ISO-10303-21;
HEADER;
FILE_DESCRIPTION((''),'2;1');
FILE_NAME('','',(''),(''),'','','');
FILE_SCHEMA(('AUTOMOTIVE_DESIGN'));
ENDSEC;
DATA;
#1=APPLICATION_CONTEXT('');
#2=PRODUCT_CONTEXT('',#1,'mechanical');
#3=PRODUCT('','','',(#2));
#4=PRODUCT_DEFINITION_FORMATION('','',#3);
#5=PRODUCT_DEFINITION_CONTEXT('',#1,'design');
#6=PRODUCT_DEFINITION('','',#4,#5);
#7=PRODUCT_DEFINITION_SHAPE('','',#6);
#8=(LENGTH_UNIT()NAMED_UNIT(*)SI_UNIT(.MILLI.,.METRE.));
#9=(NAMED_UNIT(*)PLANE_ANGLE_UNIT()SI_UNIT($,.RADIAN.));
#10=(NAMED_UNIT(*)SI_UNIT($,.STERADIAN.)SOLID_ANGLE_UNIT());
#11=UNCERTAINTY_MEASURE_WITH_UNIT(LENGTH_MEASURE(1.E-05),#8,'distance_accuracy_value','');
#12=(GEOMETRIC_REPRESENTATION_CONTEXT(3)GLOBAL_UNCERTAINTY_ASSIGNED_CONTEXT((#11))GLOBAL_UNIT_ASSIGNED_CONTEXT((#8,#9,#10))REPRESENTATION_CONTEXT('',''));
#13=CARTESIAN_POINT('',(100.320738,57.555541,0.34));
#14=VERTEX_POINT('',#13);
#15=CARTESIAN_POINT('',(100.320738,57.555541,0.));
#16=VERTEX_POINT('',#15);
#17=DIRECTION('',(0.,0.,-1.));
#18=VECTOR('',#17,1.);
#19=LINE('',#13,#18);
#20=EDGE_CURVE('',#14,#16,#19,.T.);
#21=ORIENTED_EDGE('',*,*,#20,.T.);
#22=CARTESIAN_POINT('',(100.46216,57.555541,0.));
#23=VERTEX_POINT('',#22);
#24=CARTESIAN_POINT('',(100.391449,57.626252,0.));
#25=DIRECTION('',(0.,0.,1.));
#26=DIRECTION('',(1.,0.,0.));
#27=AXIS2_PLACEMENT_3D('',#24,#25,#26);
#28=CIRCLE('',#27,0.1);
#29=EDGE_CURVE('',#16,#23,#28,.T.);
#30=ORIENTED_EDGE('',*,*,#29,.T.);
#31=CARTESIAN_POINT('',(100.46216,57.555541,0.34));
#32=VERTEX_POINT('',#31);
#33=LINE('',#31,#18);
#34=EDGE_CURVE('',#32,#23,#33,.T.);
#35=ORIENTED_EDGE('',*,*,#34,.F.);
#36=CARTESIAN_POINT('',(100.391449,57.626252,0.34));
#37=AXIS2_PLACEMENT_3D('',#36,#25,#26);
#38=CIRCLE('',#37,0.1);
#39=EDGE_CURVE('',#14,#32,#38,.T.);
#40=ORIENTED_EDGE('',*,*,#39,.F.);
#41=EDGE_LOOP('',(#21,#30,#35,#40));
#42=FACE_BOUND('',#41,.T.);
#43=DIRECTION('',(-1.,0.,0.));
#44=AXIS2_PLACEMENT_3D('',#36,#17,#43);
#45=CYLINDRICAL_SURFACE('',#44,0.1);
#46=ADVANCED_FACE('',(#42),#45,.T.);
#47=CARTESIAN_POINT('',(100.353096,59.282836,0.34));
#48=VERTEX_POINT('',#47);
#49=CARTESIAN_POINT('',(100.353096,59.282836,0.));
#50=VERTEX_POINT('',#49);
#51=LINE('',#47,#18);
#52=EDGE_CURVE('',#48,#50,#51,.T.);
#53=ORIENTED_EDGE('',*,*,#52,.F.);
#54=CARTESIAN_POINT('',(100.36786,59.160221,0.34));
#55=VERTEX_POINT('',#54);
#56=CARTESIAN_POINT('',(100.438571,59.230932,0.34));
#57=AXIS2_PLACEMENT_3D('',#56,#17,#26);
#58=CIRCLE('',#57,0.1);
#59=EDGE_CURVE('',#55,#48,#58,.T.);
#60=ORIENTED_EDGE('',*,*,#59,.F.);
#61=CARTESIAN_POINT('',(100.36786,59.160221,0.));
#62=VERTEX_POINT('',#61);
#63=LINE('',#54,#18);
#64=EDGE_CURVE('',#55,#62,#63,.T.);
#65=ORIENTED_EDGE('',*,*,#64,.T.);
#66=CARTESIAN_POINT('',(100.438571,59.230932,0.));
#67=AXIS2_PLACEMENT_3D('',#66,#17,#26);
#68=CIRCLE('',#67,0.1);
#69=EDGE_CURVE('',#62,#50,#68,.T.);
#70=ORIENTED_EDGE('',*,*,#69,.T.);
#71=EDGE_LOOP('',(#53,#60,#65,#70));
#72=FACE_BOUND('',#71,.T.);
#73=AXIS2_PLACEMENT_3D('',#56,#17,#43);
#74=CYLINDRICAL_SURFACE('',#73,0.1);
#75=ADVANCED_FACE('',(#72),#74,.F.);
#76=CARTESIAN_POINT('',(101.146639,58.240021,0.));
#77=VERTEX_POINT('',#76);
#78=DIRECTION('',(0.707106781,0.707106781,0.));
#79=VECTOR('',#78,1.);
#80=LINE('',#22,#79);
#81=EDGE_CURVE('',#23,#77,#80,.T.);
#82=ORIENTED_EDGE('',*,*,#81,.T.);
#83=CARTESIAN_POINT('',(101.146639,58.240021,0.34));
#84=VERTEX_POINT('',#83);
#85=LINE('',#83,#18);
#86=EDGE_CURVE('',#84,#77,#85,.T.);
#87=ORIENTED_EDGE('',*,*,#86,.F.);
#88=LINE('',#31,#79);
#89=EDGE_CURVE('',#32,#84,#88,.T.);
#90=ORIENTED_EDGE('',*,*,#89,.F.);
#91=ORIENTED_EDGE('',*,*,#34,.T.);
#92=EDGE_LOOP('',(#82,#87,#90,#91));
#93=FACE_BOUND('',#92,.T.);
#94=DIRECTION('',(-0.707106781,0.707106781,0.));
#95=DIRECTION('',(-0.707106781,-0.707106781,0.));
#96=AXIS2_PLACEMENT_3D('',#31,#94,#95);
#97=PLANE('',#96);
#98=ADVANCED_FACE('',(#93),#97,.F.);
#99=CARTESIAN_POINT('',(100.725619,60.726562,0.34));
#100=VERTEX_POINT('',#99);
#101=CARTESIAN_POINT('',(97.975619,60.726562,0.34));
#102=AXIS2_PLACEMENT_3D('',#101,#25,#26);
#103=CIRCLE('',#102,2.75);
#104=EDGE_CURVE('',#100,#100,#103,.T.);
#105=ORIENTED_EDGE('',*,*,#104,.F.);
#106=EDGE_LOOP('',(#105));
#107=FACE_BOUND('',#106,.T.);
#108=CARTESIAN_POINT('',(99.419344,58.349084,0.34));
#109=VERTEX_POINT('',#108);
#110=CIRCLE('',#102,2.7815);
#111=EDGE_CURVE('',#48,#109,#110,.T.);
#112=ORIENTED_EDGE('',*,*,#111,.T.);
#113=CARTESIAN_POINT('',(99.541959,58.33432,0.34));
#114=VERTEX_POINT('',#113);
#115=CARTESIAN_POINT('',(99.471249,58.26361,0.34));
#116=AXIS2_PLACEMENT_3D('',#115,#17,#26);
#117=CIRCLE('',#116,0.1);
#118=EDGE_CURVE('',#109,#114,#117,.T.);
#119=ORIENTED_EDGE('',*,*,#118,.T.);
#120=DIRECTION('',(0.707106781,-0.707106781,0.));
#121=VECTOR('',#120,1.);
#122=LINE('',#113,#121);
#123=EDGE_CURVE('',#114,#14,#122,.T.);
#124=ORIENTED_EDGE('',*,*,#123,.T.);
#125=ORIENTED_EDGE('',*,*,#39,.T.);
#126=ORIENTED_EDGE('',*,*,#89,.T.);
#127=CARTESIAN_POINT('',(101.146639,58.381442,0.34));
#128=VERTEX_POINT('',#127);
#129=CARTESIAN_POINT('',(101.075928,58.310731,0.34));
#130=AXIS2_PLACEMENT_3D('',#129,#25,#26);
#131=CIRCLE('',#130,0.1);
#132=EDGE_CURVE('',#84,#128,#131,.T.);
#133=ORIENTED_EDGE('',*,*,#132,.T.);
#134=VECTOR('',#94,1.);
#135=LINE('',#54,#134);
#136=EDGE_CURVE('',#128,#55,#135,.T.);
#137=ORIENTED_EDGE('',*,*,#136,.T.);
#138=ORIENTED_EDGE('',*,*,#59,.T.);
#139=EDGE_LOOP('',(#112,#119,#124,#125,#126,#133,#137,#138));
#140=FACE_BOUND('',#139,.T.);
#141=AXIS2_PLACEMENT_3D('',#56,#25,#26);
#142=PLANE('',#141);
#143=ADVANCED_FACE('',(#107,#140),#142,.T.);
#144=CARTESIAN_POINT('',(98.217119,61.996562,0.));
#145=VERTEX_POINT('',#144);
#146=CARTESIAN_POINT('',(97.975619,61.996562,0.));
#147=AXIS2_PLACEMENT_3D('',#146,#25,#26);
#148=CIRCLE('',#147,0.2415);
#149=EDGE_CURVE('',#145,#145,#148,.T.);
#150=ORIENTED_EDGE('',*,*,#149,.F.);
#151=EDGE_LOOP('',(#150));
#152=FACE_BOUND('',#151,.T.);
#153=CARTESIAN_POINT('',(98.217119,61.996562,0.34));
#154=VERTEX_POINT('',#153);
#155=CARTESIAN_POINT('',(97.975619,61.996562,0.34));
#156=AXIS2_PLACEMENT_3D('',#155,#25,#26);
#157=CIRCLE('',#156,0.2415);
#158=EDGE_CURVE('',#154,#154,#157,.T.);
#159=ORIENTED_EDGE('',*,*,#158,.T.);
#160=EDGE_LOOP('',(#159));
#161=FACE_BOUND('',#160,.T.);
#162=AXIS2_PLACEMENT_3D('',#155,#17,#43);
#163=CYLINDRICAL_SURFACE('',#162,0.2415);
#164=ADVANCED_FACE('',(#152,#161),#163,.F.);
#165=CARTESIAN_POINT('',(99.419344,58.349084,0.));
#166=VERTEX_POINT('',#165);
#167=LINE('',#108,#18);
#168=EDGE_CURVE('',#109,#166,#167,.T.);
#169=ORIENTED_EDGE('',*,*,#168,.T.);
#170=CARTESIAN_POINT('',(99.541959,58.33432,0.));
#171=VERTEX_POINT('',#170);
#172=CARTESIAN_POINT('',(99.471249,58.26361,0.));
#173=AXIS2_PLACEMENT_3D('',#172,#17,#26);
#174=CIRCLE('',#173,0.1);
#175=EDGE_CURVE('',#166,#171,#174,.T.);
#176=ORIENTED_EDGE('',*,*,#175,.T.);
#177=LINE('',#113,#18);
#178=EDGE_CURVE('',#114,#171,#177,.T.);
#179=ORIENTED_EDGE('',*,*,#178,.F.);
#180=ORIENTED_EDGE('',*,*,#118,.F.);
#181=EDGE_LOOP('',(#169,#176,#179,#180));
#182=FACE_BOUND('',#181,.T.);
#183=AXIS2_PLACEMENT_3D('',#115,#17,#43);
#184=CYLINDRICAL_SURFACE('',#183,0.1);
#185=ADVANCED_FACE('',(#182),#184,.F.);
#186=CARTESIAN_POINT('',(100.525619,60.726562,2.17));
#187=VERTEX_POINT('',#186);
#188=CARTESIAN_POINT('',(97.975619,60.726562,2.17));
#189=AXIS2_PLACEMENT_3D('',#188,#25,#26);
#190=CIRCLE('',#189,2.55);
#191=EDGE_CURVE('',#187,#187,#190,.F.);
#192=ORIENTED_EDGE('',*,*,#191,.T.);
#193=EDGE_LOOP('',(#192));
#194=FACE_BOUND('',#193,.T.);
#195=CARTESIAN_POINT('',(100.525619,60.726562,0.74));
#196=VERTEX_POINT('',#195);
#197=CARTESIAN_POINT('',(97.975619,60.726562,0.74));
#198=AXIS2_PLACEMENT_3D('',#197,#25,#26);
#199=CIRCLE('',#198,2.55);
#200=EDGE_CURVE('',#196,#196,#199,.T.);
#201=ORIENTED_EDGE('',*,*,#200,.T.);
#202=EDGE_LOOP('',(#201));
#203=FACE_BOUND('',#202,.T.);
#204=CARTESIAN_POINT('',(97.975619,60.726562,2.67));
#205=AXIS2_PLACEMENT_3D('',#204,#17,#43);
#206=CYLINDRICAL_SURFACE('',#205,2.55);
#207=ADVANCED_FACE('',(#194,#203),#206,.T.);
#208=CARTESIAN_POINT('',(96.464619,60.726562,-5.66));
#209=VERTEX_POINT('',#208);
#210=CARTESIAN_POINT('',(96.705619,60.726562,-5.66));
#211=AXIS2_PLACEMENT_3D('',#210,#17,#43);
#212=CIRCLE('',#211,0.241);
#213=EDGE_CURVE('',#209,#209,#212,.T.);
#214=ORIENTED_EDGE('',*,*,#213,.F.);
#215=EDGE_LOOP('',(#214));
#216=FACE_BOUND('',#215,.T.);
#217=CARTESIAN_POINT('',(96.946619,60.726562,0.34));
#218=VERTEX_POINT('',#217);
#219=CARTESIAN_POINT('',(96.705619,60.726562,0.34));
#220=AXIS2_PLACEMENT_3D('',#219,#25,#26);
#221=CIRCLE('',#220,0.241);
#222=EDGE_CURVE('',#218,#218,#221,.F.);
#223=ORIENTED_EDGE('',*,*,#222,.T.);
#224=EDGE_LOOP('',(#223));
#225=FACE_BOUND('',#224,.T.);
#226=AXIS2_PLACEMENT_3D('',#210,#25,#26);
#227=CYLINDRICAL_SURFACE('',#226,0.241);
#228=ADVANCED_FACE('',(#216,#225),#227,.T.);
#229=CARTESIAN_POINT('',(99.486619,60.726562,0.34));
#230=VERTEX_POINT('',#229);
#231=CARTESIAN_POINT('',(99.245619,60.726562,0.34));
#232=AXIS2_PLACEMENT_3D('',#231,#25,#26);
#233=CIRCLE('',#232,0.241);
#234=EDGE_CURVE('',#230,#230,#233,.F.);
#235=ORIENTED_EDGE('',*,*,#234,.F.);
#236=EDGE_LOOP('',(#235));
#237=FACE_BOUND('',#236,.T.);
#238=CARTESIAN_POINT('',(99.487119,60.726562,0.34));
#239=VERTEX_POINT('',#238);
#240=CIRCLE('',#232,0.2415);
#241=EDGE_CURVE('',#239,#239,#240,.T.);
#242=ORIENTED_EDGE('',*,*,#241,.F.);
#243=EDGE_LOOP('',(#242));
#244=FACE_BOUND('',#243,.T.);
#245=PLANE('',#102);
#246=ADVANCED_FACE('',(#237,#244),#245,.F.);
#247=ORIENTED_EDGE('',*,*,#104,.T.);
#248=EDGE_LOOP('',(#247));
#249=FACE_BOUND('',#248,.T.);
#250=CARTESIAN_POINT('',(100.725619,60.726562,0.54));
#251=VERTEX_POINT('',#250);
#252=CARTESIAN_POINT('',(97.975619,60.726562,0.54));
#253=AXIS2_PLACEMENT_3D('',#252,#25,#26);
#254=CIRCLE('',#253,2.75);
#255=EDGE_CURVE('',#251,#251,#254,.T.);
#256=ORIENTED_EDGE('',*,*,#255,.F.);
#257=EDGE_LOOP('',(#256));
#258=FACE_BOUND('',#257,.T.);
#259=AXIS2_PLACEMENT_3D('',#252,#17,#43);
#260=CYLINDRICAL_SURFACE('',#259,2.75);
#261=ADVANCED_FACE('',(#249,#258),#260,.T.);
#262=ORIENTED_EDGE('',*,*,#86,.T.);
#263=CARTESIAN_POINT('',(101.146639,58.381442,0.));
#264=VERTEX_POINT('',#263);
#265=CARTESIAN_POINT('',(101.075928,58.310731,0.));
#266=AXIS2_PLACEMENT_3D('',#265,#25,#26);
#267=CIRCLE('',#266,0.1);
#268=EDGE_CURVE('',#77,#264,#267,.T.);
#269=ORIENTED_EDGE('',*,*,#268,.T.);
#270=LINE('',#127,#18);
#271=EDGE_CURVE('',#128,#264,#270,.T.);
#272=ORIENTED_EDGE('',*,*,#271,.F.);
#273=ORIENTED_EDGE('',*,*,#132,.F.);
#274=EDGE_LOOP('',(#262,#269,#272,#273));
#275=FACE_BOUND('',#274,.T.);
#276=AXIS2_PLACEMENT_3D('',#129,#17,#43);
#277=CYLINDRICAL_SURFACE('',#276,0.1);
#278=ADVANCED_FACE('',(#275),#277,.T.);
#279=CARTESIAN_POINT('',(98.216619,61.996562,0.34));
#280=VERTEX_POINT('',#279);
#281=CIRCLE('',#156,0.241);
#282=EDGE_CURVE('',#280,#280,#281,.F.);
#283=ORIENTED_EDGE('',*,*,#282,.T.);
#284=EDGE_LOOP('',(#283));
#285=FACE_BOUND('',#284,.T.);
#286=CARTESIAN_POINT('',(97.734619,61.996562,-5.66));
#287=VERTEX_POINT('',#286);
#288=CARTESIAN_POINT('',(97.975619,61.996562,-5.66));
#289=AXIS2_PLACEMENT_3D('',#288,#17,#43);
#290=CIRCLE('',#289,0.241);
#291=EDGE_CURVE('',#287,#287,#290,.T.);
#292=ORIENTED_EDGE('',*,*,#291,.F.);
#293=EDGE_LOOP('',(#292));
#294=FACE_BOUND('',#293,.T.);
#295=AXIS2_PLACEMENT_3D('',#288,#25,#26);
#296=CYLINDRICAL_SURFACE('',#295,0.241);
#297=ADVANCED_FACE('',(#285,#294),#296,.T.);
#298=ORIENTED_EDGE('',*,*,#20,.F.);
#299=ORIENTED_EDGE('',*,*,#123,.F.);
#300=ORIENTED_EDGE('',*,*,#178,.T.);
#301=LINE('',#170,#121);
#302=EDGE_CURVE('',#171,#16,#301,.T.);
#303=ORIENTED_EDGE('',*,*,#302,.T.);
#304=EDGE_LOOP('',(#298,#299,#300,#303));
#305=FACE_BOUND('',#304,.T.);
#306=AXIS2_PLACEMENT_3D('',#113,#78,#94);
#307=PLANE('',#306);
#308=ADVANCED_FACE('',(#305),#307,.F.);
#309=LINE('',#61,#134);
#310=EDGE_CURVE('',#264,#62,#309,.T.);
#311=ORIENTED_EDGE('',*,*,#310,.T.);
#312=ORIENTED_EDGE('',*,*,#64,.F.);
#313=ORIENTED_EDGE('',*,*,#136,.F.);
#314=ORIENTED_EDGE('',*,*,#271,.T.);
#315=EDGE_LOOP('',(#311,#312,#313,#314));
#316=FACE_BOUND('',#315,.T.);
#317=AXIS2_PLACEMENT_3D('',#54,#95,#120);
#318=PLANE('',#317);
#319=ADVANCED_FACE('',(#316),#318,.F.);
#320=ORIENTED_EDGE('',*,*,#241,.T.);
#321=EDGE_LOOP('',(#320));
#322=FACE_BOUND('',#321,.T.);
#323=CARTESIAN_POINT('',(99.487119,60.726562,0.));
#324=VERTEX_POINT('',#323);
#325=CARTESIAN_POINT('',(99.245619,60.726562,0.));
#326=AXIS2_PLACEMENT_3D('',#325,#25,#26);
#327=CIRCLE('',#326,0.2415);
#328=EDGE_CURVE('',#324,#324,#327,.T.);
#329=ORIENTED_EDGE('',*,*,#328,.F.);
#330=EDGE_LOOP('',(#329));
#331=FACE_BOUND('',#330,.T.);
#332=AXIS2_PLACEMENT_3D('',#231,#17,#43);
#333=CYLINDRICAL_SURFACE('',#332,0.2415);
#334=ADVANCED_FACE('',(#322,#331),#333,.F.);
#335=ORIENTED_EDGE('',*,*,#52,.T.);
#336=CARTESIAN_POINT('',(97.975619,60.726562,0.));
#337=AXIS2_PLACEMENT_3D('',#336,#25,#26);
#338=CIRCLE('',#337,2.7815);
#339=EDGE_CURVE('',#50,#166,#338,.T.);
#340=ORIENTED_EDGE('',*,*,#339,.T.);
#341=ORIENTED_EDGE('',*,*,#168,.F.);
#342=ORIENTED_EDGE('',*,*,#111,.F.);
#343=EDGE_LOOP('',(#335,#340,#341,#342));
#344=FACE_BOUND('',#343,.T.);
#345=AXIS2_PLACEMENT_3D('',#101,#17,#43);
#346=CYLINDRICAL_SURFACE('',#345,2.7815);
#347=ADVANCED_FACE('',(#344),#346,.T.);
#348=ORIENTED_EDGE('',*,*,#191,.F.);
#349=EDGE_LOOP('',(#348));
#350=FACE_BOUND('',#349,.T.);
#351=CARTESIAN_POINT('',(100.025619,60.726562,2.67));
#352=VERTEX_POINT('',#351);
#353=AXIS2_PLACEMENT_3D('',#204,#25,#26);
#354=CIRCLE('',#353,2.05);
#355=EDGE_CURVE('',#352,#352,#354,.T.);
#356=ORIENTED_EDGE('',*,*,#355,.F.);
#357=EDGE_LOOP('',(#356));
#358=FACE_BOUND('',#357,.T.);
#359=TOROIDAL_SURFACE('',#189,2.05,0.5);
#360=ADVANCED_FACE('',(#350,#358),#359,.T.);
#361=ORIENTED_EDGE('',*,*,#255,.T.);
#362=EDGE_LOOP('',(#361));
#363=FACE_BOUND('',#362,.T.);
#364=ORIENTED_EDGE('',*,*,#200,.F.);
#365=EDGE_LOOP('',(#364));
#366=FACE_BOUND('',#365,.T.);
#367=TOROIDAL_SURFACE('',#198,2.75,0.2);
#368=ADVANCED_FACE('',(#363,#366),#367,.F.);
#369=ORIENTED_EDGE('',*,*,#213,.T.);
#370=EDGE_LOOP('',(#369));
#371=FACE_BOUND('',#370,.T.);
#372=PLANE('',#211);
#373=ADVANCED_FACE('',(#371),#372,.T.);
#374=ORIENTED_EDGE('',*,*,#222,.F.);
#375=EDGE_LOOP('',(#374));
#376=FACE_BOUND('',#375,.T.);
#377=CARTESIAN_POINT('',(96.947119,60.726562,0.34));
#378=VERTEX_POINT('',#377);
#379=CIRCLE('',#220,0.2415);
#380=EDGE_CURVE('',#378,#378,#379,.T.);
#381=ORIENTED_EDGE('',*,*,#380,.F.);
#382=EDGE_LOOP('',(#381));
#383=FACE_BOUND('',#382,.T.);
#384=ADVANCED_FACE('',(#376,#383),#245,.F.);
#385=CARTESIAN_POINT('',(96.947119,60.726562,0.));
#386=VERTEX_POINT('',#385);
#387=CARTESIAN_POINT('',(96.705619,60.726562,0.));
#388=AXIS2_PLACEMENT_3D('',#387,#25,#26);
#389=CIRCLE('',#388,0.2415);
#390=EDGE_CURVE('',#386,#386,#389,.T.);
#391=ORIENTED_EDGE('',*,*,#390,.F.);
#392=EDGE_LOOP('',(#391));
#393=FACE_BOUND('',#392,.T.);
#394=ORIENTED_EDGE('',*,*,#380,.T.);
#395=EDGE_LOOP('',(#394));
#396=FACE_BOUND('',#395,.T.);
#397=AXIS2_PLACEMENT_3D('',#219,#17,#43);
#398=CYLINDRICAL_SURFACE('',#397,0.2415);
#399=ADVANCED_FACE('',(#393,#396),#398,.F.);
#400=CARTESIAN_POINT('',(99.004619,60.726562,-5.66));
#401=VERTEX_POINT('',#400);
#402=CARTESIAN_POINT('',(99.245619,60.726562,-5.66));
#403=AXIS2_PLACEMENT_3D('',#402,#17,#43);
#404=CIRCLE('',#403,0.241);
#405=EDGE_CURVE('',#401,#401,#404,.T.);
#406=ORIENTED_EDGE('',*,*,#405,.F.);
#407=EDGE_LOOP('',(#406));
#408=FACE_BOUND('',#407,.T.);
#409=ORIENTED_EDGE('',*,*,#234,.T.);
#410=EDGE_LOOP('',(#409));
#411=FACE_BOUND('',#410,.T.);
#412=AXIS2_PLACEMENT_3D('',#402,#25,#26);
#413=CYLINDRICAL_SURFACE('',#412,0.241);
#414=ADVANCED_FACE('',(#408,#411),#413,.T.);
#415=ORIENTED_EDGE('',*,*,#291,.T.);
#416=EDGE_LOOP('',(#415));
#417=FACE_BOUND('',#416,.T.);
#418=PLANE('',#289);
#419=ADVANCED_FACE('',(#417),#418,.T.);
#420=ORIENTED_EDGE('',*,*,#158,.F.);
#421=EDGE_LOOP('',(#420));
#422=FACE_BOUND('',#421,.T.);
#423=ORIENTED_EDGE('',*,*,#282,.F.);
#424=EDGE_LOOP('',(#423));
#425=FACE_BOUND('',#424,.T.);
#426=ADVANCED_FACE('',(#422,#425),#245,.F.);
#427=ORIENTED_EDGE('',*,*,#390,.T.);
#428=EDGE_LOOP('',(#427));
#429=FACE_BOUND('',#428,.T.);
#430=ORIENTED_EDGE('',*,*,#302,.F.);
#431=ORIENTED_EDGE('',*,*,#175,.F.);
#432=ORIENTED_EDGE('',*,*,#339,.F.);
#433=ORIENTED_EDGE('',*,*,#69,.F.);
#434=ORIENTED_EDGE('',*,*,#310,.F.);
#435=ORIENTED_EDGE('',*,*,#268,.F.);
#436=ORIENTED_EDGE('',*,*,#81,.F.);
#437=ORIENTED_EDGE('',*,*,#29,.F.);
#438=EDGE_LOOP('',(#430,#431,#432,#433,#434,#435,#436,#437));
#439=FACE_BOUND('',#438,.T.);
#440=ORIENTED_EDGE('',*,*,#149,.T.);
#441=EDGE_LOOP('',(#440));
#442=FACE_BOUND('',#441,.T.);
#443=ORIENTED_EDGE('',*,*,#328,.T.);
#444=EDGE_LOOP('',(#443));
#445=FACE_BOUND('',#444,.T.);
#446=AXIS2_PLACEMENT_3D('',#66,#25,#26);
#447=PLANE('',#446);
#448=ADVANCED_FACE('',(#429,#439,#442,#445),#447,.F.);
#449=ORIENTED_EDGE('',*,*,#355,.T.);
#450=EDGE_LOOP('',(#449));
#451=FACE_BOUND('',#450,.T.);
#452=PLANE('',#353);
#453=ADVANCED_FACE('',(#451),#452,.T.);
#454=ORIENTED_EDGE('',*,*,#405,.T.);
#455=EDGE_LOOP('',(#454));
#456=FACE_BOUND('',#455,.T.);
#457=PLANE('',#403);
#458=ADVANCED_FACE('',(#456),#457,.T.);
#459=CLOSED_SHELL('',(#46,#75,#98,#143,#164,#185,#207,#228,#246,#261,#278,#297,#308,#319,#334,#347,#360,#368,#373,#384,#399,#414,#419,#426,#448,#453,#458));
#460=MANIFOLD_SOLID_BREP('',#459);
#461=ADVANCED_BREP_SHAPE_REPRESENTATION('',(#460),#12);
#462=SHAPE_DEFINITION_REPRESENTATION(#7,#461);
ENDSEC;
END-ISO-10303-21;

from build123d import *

# Parameters (mm, degrees)
SKETCH1_R           = 0.2415
BOSS_EXTRUDE1_DEPTH = 0.34
SKETCH2_R           = 2.75
BOSS_EXTRUDE2_DEPTH = 0.2
SKETCH3_R           = 2.55
BOSS_EXTRUDE3_DEPTH = 2.13
FILLET1_R           = 0.2
FILLET2_R           = 0.5
SKETCH4_R           = 0.241
BOSS_EXTRUDE4_DEPTH = 6


with BuildPart() as part:
    # Sketch1 → Boss-Extrude1 (new body)
    with BuildSketch(Plane.XY):
        with BuildLine():
            Line((99.541959491, 58.334320384), (100.320738424, 57.55554145))
            ThreePointArc((100.320738424, 57.55554145), (100.391449102, 57.526252128), (100.462159781, 57.55554145))
            Line((100.462159781, 57.55554145), (101.146639145, 58.240020814))
            ThreePointArc((101.146639145, 58.240020814), (101.175928467, 58.310731493), (101.146639145, 58.381442171))
            Line((101.146639145, 58.381442171), (100.367860211, 59.160221104))
            ThreePointArc((100.367860211, 59.160221104), (100.339288016, 59.218977235), (100.353096237, 59.282836347))
            ThreePointArc((100.353096237, 59.282836347), (96.008801273, 62.693379322), (99.419344248, 58.349084358))
            ThreePointArc((99.419344248, 58.349084358), (99.48320336, 58.362892578), (99.541959491, 58.334320384))
        make_face()
        with Locations((97.975618784, 61.99656181)):
            Circle(SKETCH1_R, mode=Mode.SUBTRACT)
        with Locations((99.245618784, 60.72656181)):
            Circle(SKETCH1_R, mode=Mode.SUBTRACT)
        with Locations((96.705618784, 60.72656181)):
            Circle(SKETCH1_R, mode=Mode.SUBTRACT)
    extrude(amount=BOSS_EXTRUDE1_DEPTH)

    # Sketch2 → Boss-Extrude2 (add)
    with BuildSketch(Plane.XY.offset(0.34)):
        with Locations((97.975618784, 60.72656181)):
            Circle(SKETCH2_R)
    extrude(amount=BOSS_EXTRUDE2_DEPTH)

    # Sketch3 → Boss-Extrude3 (add)
    with BuildSketch(Plane.XY.offset(0.54)):
        with Locations((97.975618784, 60.72656181)):
            Circle(SKETCH3_R)
    extrude(amount=BOSS_EXTRUDE3_DEPTH)

    # Fillet1
    fillet1_edges = [part.edges().sort_by_distance(p)[0] for p in [
        (95.425618784, 60.72656181, 0.54),
    ]]
    fillet(fillet1_edges, radius=FILLET1_R - 0.0001)  # a hair under: the kernel refuses the full size

    # Fillet2
    fillet2_edges = [part.edges().sort_by_distance(p)[0] for p in [
        (95.425618784, 60.72656181, 2.67),
    ]]
    fillet(fillet2_edges, radius=FILLET2_R)

    # Sketch4 → Boss-Extrude4 (add)
    with BuildSketch(Plane(origin=(0, 0, 0.34), x_dir=(-1, 0, 0), z_dir=(0, 0, -1))):
        with Locations(Location((-99.245618784, 60.72656181, 0), (0, 0, 180))):
            Circle(SKETCH4_R)
        with Locations(Location((-97.975618784, 61.99656181, 0), (0, 0, 180))):
            Circle(SKETCH4_R)
        with Locations(Location((-96.705618784, 60.72656181, 0), (0, 0, 180))):
            Circle(SKETCH4_R)
    extrude(amount=BOSS_EXTRUDE4_DEPTH)


solid = part.part
